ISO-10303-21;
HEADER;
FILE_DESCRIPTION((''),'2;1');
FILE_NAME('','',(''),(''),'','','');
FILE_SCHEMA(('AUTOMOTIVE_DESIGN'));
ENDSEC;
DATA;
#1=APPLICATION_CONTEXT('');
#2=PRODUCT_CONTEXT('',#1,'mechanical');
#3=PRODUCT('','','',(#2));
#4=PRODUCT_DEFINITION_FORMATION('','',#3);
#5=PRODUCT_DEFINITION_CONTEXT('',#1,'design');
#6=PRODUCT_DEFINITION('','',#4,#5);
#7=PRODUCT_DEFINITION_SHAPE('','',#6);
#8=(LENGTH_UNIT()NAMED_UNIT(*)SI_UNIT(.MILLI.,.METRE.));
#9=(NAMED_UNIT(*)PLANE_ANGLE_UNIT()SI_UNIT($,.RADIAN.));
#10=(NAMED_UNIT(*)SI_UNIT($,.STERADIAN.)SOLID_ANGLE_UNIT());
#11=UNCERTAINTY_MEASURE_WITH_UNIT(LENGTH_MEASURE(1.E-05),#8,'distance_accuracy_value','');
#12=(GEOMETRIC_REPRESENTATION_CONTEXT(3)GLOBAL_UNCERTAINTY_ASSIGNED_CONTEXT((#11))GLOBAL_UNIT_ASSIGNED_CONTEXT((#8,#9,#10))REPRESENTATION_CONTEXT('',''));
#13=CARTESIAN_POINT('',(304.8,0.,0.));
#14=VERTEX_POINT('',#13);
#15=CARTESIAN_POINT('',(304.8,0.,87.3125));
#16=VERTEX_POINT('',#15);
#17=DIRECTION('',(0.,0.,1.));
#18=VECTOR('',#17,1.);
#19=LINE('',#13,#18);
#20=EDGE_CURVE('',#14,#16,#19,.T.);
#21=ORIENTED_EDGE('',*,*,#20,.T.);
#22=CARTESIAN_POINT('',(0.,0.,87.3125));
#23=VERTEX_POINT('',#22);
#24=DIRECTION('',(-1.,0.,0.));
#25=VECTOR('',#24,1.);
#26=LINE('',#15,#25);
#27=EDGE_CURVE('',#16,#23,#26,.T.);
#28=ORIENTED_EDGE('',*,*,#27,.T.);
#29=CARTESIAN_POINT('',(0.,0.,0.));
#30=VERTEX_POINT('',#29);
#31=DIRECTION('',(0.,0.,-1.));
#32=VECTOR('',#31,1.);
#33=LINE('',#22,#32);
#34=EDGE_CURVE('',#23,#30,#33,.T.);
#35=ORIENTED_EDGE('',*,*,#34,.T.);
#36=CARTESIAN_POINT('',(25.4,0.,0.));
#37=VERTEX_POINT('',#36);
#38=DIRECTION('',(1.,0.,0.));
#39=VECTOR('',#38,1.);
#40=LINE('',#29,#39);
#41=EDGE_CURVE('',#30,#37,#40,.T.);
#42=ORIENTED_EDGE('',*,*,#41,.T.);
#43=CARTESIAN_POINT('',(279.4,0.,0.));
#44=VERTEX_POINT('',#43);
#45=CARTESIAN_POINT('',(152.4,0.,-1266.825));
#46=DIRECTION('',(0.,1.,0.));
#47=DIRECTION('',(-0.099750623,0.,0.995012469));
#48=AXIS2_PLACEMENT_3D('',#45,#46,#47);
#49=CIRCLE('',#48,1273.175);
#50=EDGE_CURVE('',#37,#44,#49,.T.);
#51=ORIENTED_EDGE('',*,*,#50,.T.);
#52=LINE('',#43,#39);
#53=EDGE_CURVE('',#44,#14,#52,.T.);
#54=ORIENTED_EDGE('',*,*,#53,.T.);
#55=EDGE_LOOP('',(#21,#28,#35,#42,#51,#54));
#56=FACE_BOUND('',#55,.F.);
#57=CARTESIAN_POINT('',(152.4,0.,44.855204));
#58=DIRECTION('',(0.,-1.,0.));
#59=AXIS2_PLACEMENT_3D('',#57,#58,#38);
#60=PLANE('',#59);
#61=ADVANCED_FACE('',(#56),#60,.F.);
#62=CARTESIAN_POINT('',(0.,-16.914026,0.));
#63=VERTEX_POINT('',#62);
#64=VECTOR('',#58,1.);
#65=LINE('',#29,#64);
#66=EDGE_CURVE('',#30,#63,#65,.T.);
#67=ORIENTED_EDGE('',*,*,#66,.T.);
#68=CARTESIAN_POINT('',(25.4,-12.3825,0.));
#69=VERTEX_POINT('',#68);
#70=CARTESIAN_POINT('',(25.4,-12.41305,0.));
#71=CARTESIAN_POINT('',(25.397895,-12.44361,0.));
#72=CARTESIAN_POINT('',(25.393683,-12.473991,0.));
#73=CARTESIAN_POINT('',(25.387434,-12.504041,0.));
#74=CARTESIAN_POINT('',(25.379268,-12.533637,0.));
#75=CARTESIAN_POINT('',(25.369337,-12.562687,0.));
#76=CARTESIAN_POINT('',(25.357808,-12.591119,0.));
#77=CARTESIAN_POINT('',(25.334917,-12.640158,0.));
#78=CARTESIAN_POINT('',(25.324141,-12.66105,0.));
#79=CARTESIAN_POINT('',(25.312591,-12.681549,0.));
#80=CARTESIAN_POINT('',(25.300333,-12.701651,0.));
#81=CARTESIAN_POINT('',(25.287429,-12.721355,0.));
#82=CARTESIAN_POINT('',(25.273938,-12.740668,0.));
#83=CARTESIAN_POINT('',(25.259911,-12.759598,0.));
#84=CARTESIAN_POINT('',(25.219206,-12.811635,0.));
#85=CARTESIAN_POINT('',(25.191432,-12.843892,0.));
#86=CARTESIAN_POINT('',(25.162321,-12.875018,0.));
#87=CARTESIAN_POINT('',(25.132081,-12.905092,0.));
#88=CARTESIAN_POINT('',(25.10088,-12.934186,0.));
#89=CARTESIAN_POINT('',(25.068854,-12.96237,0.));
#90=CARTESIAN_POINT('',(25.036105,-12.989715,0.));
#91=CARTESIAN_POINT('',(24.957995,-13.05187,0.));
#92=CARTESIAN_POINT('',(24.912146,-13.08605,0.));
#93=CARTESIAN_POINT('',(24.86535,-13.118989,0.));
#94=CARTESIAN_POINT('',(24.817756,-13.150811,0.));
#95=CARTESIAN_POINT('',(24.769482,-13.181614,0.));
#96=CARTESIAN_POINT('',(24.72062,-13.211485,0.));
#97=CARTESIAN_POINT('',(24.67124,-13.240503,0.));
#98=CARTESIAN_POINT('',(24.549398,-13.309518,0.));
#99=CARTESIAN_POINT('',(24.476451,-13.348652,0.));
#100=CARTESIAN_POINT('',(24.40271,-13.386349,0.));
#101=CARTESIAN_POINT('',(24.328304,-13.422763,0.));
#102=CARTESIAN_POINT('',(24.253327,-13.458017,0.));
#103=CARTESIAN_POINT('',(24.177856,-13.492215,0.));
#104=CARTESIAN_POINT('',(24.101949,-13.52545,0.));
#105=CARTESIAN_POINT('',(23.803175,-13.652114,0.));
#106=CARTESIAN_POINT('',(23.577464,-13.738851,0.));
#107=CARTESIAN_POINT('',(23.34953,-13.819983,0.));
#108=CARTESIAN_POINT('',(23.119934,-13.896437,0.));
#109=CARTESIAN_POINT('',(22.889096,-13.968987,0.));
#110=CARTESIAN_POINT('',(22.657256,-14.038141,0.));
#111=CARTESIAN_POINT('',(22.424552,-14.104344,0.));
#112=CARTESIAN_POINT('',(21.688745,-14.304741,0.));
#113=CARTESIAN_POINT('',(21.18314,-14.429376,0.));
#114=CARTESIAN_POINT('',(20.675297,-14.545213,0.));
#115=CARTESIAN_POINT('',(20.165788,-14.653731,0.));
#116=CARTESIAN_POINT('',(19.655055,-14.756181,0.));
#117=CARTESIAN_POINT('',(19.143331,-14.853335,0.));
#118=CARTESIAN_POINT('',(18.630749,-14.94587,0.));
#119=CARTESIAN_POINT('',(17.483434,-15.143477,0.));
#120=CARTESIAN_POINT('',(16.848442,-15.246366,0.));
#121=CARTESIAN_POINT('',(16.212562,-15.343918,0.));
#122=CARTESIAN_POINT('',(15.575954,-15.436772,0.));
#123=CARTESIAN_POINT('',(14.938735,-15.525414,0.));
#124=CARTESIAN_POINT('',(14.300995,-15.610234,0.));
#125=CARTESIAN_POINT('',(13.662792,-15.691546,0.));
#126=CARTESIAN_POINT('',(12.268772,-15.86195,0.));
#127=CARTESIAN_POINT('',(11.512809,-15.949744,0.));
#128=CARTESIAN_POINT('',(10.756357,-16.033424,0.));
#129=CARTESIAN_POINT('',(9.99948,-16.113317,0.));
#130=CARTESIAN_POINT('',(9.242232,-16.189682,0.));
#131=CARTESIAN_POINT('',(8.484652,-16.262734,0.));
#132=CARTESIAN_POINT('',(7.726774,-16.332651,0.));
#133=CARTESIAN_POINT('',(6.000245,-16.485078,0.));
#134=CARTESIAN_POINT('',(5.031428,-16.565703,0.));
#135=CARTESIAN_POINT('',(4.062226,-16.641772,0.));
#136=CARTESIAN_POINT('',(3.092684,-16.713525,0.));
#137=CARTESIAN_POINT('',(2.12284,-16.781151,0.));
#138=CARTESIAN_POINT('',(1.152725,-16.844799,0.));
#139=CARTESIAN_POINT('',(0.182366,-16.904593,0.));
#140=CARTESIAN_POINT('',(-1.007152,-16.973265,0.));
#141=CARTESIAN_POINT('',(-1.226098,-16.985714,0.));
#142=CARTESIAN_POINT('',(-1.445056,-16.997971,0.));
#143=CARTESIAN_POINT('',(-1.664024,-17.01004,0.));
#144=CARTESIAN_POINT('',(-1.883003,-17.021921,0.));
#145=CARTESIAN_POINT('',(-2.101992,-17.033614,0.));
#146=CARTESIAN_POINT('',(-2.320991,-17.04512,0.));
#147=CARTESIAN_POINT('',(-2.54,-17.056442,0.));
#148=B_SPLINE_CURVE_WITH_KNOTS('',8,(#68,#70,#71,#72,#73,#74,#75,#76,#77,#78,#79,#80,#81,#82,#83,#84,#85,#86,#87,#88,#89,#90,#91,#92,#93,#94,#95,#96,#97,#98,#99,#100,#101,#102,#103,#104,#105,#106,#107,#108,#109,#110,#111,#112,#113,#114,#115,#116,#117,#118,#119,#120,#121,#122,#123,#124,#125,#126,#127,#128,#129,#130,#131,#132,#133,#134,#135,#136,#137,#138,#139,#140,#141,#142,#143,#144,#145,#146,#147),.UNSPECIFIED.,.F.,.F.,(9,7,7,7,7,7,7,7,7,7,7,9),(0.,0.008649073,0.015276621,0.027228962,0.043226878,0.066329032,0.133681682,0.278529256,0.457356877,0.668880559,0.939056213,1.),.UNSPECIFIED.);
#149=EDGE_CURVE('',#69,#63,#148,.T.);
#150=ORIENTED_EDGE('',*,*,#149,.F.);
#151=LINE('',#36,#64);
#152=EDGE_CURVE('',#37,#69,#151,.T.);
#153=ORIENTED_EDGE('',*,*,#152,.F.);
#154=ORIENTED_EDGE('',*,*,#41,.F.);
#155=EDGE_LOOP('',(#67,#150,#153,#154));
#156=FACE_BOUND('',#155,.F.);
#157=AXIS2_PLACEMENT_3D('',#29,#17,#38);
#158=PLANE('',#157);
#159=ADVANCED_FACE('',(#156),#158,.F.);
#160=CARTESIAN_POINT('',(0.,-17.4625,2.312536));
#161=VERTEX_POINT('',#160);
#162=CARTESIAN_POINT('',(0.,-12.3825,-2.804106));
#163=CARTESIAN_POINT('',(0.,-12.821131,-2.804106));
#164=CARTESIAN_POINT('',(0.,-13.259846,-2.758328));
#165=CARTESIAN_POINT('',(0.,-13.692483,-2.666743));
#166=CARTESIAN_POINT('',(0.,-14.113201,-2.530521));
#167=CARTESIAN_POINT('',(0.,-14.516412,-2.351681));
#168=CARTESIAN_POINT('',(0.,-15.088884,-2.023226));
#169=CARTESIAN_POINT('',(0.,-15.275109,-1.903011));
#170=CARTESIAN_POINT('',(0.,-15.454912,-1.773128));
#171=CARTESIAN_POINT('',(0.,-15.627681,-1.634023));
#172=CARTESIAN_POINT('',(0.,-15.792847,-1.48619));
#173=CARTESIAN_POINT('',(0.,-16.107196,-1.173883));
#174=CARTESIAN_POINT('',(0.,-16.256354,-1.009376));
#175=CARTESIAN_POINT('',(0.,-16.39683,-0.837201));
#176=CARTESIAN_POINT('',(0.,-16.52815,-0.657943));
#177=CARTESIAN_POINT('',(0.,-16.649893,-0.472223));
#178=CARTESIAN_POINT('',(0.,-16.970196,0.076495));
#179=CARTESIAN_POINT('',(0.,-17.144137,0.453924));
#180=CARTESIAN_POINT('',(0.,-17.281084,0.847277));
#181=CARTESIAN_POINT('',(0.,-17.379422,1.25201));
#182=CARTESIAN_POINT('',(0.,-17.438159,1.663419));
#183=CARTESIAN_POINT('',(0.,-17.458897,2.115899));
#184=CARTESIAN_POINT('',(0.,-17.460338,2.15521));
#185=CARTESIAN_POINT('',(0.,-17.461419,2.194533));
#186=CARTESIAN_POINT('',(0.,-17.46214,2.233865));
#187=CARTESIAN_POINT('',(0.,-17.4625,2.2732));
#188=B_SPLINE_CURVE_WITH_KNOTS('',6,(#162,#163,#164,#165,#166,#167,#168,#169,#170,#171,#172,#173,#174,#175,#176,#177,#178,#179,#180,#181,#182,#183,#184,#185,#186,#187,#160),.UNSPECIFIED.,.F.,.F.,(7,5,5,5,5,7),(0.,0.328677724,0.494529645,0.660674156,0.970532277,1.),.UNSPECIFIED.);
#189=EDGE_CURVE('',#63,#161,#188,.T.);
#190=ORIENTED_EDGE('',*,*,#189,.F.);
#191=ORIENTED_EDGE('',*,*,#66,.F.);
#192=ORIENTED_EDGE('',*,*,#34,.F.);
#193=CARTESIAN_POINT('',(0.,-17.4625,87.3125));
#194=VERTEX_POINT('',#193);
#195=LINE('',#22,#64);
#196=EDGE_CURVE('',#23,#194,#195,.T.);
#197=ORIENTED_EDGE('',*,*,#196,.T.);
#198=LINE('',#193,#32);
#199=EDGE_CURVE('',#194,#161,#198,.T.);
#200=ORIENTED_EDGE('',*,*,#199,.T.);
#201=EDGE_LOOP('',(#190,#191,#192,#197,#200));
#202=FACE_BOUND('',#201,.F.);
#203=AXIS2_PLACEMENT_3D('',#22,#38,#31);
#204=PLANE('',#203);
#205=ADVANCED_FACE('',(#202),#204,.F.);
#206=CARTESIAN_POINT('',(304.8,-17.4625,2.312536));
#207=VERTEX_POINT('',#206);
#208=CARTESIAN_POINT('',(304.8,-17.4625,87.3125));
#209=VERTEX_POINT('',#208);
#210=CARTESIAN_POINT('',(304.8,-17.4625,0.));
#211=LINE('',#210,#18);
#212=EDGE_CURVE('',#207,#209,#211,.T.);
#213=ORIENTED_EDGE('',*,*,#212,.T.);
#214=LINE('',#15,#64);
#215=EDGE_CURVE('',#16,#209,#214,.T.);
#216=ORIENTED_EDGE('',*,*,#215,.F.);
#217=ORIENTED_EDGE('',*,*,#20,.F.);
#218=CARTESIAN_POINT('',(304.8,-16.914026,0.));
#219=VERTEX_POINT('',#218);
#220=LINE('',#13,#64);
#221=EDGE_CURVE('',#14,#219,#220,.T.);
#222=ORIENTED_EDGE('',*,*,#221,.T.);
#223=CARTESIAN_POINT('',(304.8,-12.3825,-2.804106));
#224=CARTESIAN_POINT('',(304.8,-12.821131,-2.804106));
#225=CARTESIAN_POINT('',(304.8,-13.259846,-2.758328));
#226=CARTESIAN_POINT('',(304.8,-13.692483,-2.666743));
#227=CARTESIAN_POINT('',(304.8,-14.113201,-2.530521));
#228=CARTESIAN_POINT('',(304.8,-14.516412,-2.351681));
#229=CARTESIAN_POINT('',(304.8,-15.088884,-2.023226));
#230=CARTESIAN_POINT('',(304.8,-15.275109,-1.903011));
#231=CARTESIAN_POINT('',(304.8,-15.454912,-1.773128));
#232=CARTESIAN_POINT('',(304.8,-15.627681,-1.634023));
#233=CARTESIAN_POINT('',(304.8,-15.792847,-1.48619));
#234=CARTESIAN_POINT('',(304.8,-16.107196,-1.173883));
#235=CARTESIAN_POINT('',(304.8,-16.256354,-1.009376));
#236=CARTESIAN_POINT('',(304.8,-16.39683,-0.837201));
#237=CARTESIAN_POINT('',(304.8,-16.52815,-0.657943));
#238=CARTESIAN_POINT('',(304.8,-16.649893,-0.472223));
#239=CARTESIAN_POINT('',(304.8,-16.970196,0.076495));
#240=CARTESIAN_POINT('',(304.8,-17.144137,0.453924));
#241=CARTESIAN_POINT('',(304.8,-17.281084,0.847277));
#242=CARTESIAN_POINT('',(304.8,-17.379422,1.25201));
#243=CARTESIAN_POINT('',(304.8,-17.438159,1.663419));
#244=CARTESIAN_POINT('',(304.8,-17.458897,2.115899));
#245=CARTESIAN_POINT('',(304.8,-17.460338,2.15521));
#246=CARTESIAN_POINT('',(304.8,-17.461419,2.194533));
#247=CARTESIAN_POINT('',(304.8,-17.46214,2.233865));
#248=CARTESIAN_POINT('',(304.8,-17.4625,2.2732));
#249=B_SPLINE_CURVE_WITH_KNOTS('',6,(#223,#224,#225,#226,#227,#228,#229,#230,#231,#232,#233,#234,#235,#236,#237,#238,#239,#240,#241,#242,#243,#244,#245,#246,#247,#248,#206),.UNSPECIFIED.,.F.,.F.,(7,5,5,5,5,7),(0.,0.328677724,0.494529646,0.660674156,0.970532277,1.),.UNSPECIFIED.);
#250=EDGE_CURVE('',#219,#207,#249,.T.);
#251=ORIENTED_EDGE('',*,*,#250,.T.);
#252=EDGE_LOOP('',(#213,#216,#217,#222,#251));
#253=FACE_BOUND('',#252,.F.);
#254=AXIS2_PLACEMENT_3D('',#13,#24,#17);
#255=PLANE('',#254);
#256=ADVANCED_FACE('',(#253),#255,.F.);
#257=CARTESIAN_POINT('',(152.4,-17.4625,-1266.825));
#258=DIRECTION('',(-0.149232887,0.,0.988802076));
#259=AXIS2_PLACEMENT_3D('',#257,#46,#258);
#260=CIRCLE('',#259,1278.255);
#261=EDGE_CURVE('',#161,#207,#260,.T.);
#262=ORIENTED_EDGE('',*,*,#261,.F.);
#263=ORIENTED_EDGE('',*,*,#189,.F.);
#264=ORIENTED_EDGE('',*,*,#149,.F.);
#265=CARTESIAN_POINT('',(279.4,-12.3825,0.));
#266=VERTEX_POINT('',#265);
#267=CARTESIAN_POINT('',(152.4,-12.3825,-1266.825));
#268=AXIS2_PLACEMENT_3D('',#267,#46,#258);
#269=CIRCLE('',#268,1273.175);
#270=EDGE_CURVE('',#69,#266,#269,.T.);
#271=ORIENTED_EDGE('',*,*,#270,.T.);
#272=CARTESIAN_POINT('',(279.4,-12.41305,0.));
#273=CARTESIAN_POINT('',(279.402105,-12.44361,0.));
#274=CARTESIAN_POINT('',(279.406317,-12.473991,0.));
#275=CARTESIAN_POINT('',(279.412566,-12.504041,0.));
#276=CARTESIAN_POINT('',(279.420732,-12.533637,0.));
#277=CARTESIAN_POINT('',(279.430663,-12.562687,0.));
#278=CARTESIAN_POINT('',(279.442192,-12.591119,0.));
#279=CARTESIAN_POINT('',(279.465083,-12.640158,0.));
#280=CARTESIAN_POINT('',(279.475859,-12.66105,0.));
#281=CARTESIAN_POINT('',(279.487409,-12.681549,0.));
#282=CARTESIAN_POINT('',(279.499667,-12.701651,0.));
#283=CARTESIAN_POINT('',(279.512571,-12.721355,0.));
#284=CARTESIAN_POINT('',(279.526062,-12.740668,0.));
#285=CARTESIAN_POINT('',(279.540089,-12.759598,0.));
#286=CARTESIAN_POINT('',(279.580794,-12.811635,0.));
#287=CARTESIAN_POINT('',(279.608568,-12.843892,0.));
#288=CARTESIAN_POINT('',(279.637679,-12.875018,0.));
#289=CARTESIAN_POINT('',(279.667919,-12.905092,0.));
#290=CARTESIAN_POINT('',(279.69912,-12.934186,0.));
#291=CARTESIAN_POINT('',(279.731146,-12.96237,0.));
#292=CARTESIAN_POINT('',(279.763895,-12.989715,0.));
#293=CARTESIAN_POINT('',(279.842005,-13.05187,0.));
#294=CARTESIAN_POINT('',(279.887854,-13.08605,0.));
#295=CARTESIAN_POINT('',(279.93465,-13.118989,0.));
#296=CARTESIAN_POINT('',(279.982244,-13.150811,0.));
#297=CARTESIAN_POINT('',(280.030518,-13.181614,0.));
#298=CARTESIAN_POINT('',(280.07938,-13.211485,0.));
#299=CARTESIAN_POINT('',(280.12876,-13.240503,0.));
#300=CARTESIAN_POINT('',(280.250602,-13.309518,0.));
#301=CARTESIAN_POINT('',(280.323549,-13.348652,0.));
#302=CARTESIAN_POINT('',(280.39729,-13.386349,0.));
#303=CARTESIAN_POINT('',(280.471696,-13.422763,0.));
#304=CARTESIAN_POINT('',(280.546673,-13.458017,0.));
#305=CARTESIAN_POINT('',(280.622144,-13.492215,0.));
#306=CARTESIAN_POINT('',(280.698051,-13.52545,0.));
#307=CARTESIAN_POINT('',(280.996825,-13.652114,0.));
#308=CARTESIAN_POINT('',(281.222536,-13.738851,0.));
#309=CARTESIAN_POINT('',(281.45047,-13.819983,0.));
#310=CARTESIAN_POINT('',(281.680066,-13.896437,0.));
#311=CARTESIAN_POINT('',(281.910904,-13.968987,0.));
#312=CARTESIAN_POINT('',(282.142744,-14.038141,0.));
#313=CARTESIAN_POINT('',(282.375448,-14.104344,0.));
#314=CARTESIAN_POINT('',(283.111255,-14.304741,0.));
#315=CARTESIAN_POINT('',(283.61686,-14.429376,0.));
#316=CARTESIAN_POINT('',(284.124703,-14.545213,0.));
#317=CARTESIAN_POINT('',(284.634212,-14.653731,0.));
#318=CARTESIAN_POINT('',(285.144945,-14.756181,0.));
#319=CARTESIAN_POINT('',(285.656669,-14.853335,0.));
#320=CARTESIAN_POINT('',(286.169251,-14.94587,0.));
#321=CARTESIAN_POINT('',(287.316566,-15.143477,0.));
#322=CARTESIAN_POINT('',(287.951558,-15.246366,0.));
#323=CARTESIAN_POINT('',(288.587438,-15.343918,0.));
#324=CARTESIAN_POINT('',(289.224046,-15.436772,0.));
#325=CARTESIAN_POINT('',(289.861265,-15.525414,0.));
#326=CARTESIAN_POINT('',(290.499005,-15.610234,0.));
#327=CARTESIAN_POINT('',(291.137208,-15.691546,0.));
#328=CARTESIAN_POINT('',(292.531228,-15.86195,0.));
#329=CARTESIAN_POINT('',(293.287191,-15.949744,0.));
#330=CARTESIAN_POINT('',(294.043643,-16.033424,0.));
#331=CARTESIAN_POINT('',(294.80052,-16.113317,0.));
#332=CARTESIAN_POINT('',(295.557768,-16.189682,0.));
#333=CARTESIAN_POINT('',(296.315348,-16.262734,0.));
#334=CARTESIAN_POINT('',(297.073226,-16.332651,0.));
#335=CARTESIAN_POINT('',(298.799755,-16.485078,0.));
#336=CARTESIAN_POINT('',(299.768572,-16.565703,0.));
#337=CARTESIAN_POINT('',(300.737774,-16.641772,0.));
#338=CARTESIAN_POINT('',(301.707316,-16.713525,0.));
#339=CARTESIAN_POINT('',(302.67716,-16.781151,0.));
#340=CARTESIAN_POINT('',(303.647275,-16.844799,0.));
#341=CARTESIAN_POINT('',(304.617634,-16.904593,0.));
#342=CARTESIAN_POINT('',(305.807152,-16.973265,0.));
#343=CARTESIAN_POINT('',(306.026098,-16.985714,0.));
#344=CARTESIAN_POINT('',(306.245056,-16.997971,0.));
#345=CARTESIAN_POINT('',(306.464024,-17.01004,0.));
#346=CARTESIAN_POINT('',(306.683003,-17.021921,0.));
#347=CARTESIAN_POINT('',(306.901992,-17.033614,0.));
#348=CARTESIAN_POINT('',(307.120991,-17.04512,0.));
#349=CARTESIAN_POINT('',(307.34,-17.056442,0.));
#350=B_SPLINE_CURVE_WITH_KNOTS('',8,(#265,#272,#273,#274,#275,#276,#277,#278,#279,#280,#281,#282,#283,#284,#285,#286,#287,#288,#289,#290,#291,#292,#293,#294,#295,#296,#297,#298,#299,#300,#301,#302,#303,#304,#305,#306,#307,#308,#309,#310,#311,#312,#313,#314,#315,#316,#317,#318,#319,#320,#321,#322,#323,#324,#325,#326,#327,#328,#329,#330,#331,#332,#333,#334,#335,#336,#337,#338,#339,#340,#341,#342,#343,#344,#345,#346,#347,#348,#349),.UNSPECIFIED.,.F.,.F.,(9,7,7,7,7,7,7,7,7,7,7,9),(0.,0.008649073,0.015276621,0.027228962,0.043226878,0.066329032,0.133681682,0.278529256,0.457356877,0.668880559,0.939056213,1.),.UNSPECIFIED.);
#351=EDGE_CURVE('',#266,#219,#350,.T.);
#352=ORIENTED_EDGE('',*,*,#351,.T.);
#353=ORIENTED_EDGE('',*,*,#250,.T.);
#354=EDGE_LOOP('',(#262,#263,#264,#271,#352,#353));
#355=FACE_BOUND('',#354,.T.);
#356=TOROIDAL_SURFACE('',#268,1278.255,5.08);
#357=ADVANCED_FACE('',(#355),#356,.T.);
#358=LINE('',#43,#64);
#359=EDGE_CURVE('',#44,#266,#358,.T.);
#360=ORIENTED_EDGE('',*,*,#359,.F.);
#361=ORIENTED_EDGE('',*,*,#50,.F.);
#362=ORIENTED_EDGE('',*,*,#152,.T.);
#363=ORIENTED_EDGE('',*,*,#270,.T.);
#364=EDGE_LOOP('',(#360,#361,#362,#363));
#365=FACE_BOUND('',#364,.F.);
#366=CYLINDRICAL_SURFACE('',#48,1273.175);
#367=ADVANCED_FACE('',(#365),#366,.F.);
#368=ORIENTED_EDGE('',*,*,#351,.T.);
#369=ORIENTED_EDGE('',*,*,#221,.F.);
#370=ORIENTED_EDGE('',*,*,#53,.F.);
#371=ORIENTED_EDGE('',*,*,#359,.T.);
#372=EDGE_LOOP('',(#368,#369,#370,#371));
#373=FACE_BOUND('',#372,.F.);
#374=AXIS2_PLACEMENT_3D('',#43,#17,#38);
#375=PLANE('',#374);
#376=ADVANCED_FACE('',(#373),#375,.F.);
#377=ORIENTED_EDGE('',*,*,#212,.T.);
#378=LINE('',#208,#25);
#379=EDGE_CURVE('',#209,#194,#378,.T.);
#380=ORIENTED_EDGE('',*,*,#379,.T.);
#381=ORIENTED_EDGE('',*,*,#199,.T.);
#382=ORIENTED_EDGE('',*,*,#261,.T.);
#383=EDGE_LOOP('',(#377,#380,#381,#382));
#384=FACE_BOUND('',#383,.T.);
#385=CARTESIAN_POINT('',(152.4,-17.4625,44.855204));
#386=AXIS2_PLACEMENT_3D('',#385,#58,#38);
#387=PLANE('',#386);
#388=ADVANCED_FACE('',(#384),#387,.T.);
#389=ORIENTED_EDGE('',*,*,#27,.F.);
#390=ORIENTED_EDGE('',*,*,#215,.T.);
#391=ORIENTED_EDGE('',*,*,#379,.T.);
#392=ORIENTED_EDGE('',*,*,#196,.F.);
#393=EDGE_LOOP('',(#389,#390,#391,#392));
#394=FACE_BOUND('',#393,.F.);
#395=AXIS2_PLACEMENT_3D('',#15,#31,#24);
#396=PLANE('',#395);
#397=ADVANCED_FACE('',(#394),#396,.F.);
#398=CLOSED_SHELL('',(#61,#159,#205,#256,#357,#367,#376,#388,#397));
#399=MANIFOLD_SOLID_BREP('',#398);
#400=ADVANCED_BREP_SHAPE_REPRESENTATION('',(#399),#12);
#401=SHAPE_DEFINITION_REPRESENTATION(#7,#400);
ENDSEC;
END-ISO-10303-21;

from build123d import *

# Parameters (mm, degrees)
F1_DEPTH    = 17.4625
F2_T2_ANGLE = 17.1649477786


# Not quite as in the source:
# - a fillet or chamfer that OpenCascade refuses, or shapes differently, is made with other operations: its cross-section is extruded or revolved along the edge and cut away or added


with BuildPart() as f1:
    # F0 (on Front) → F1 (new body)
    with BuildSketch(Plane.XZ):
        with BuildLine():
            Line((0, 87.3125), (0, 0))
            Line((0, 0), (25.4, 0))
            ThreePointArc((25.4, 0), (152.4, 6.35), (279.4, 0))
            Line((279.4, 0), (304.8, 0))
            Line((304.8, 0), (304.8, 87.3125))
            Line((304.8, 87.3125), (0, 87.3125))
        make_face()
    extrude(amount=F1_DEPTH)

    # F2: fillet of radius 5.08 on 1 edges, made by hand

    # F2_s1 → F2_t2 (revolve, cut)
    with BuildSketch(Plane(origin=(-37.9289804695, 0, -5.7243521326), x_dir=(0, 1, 0), z_dir=(-0.9888020759, 0, -0.1492328874))):
        with BuildLine():
            ThreePointArc((-12.3825, 2.2072818505), (-15.9746024484, 0.7193842989), (-17.4625, -2.8727181495))
            Line((-17.4625, -2.8727181495), (-17.4625, 2.2072818505))
            Line((-17.4625, 2.2072818505), (-12.3825, 2.2072818505))
        make_face()
    revolve(axis=Axis((152.4, -17.4625, -1266.8250000001), (0, 1, 0)), revolution_arc=F2_T2_ANGLE, mode=Mode.SUBTRACT)


solid = f1.part
